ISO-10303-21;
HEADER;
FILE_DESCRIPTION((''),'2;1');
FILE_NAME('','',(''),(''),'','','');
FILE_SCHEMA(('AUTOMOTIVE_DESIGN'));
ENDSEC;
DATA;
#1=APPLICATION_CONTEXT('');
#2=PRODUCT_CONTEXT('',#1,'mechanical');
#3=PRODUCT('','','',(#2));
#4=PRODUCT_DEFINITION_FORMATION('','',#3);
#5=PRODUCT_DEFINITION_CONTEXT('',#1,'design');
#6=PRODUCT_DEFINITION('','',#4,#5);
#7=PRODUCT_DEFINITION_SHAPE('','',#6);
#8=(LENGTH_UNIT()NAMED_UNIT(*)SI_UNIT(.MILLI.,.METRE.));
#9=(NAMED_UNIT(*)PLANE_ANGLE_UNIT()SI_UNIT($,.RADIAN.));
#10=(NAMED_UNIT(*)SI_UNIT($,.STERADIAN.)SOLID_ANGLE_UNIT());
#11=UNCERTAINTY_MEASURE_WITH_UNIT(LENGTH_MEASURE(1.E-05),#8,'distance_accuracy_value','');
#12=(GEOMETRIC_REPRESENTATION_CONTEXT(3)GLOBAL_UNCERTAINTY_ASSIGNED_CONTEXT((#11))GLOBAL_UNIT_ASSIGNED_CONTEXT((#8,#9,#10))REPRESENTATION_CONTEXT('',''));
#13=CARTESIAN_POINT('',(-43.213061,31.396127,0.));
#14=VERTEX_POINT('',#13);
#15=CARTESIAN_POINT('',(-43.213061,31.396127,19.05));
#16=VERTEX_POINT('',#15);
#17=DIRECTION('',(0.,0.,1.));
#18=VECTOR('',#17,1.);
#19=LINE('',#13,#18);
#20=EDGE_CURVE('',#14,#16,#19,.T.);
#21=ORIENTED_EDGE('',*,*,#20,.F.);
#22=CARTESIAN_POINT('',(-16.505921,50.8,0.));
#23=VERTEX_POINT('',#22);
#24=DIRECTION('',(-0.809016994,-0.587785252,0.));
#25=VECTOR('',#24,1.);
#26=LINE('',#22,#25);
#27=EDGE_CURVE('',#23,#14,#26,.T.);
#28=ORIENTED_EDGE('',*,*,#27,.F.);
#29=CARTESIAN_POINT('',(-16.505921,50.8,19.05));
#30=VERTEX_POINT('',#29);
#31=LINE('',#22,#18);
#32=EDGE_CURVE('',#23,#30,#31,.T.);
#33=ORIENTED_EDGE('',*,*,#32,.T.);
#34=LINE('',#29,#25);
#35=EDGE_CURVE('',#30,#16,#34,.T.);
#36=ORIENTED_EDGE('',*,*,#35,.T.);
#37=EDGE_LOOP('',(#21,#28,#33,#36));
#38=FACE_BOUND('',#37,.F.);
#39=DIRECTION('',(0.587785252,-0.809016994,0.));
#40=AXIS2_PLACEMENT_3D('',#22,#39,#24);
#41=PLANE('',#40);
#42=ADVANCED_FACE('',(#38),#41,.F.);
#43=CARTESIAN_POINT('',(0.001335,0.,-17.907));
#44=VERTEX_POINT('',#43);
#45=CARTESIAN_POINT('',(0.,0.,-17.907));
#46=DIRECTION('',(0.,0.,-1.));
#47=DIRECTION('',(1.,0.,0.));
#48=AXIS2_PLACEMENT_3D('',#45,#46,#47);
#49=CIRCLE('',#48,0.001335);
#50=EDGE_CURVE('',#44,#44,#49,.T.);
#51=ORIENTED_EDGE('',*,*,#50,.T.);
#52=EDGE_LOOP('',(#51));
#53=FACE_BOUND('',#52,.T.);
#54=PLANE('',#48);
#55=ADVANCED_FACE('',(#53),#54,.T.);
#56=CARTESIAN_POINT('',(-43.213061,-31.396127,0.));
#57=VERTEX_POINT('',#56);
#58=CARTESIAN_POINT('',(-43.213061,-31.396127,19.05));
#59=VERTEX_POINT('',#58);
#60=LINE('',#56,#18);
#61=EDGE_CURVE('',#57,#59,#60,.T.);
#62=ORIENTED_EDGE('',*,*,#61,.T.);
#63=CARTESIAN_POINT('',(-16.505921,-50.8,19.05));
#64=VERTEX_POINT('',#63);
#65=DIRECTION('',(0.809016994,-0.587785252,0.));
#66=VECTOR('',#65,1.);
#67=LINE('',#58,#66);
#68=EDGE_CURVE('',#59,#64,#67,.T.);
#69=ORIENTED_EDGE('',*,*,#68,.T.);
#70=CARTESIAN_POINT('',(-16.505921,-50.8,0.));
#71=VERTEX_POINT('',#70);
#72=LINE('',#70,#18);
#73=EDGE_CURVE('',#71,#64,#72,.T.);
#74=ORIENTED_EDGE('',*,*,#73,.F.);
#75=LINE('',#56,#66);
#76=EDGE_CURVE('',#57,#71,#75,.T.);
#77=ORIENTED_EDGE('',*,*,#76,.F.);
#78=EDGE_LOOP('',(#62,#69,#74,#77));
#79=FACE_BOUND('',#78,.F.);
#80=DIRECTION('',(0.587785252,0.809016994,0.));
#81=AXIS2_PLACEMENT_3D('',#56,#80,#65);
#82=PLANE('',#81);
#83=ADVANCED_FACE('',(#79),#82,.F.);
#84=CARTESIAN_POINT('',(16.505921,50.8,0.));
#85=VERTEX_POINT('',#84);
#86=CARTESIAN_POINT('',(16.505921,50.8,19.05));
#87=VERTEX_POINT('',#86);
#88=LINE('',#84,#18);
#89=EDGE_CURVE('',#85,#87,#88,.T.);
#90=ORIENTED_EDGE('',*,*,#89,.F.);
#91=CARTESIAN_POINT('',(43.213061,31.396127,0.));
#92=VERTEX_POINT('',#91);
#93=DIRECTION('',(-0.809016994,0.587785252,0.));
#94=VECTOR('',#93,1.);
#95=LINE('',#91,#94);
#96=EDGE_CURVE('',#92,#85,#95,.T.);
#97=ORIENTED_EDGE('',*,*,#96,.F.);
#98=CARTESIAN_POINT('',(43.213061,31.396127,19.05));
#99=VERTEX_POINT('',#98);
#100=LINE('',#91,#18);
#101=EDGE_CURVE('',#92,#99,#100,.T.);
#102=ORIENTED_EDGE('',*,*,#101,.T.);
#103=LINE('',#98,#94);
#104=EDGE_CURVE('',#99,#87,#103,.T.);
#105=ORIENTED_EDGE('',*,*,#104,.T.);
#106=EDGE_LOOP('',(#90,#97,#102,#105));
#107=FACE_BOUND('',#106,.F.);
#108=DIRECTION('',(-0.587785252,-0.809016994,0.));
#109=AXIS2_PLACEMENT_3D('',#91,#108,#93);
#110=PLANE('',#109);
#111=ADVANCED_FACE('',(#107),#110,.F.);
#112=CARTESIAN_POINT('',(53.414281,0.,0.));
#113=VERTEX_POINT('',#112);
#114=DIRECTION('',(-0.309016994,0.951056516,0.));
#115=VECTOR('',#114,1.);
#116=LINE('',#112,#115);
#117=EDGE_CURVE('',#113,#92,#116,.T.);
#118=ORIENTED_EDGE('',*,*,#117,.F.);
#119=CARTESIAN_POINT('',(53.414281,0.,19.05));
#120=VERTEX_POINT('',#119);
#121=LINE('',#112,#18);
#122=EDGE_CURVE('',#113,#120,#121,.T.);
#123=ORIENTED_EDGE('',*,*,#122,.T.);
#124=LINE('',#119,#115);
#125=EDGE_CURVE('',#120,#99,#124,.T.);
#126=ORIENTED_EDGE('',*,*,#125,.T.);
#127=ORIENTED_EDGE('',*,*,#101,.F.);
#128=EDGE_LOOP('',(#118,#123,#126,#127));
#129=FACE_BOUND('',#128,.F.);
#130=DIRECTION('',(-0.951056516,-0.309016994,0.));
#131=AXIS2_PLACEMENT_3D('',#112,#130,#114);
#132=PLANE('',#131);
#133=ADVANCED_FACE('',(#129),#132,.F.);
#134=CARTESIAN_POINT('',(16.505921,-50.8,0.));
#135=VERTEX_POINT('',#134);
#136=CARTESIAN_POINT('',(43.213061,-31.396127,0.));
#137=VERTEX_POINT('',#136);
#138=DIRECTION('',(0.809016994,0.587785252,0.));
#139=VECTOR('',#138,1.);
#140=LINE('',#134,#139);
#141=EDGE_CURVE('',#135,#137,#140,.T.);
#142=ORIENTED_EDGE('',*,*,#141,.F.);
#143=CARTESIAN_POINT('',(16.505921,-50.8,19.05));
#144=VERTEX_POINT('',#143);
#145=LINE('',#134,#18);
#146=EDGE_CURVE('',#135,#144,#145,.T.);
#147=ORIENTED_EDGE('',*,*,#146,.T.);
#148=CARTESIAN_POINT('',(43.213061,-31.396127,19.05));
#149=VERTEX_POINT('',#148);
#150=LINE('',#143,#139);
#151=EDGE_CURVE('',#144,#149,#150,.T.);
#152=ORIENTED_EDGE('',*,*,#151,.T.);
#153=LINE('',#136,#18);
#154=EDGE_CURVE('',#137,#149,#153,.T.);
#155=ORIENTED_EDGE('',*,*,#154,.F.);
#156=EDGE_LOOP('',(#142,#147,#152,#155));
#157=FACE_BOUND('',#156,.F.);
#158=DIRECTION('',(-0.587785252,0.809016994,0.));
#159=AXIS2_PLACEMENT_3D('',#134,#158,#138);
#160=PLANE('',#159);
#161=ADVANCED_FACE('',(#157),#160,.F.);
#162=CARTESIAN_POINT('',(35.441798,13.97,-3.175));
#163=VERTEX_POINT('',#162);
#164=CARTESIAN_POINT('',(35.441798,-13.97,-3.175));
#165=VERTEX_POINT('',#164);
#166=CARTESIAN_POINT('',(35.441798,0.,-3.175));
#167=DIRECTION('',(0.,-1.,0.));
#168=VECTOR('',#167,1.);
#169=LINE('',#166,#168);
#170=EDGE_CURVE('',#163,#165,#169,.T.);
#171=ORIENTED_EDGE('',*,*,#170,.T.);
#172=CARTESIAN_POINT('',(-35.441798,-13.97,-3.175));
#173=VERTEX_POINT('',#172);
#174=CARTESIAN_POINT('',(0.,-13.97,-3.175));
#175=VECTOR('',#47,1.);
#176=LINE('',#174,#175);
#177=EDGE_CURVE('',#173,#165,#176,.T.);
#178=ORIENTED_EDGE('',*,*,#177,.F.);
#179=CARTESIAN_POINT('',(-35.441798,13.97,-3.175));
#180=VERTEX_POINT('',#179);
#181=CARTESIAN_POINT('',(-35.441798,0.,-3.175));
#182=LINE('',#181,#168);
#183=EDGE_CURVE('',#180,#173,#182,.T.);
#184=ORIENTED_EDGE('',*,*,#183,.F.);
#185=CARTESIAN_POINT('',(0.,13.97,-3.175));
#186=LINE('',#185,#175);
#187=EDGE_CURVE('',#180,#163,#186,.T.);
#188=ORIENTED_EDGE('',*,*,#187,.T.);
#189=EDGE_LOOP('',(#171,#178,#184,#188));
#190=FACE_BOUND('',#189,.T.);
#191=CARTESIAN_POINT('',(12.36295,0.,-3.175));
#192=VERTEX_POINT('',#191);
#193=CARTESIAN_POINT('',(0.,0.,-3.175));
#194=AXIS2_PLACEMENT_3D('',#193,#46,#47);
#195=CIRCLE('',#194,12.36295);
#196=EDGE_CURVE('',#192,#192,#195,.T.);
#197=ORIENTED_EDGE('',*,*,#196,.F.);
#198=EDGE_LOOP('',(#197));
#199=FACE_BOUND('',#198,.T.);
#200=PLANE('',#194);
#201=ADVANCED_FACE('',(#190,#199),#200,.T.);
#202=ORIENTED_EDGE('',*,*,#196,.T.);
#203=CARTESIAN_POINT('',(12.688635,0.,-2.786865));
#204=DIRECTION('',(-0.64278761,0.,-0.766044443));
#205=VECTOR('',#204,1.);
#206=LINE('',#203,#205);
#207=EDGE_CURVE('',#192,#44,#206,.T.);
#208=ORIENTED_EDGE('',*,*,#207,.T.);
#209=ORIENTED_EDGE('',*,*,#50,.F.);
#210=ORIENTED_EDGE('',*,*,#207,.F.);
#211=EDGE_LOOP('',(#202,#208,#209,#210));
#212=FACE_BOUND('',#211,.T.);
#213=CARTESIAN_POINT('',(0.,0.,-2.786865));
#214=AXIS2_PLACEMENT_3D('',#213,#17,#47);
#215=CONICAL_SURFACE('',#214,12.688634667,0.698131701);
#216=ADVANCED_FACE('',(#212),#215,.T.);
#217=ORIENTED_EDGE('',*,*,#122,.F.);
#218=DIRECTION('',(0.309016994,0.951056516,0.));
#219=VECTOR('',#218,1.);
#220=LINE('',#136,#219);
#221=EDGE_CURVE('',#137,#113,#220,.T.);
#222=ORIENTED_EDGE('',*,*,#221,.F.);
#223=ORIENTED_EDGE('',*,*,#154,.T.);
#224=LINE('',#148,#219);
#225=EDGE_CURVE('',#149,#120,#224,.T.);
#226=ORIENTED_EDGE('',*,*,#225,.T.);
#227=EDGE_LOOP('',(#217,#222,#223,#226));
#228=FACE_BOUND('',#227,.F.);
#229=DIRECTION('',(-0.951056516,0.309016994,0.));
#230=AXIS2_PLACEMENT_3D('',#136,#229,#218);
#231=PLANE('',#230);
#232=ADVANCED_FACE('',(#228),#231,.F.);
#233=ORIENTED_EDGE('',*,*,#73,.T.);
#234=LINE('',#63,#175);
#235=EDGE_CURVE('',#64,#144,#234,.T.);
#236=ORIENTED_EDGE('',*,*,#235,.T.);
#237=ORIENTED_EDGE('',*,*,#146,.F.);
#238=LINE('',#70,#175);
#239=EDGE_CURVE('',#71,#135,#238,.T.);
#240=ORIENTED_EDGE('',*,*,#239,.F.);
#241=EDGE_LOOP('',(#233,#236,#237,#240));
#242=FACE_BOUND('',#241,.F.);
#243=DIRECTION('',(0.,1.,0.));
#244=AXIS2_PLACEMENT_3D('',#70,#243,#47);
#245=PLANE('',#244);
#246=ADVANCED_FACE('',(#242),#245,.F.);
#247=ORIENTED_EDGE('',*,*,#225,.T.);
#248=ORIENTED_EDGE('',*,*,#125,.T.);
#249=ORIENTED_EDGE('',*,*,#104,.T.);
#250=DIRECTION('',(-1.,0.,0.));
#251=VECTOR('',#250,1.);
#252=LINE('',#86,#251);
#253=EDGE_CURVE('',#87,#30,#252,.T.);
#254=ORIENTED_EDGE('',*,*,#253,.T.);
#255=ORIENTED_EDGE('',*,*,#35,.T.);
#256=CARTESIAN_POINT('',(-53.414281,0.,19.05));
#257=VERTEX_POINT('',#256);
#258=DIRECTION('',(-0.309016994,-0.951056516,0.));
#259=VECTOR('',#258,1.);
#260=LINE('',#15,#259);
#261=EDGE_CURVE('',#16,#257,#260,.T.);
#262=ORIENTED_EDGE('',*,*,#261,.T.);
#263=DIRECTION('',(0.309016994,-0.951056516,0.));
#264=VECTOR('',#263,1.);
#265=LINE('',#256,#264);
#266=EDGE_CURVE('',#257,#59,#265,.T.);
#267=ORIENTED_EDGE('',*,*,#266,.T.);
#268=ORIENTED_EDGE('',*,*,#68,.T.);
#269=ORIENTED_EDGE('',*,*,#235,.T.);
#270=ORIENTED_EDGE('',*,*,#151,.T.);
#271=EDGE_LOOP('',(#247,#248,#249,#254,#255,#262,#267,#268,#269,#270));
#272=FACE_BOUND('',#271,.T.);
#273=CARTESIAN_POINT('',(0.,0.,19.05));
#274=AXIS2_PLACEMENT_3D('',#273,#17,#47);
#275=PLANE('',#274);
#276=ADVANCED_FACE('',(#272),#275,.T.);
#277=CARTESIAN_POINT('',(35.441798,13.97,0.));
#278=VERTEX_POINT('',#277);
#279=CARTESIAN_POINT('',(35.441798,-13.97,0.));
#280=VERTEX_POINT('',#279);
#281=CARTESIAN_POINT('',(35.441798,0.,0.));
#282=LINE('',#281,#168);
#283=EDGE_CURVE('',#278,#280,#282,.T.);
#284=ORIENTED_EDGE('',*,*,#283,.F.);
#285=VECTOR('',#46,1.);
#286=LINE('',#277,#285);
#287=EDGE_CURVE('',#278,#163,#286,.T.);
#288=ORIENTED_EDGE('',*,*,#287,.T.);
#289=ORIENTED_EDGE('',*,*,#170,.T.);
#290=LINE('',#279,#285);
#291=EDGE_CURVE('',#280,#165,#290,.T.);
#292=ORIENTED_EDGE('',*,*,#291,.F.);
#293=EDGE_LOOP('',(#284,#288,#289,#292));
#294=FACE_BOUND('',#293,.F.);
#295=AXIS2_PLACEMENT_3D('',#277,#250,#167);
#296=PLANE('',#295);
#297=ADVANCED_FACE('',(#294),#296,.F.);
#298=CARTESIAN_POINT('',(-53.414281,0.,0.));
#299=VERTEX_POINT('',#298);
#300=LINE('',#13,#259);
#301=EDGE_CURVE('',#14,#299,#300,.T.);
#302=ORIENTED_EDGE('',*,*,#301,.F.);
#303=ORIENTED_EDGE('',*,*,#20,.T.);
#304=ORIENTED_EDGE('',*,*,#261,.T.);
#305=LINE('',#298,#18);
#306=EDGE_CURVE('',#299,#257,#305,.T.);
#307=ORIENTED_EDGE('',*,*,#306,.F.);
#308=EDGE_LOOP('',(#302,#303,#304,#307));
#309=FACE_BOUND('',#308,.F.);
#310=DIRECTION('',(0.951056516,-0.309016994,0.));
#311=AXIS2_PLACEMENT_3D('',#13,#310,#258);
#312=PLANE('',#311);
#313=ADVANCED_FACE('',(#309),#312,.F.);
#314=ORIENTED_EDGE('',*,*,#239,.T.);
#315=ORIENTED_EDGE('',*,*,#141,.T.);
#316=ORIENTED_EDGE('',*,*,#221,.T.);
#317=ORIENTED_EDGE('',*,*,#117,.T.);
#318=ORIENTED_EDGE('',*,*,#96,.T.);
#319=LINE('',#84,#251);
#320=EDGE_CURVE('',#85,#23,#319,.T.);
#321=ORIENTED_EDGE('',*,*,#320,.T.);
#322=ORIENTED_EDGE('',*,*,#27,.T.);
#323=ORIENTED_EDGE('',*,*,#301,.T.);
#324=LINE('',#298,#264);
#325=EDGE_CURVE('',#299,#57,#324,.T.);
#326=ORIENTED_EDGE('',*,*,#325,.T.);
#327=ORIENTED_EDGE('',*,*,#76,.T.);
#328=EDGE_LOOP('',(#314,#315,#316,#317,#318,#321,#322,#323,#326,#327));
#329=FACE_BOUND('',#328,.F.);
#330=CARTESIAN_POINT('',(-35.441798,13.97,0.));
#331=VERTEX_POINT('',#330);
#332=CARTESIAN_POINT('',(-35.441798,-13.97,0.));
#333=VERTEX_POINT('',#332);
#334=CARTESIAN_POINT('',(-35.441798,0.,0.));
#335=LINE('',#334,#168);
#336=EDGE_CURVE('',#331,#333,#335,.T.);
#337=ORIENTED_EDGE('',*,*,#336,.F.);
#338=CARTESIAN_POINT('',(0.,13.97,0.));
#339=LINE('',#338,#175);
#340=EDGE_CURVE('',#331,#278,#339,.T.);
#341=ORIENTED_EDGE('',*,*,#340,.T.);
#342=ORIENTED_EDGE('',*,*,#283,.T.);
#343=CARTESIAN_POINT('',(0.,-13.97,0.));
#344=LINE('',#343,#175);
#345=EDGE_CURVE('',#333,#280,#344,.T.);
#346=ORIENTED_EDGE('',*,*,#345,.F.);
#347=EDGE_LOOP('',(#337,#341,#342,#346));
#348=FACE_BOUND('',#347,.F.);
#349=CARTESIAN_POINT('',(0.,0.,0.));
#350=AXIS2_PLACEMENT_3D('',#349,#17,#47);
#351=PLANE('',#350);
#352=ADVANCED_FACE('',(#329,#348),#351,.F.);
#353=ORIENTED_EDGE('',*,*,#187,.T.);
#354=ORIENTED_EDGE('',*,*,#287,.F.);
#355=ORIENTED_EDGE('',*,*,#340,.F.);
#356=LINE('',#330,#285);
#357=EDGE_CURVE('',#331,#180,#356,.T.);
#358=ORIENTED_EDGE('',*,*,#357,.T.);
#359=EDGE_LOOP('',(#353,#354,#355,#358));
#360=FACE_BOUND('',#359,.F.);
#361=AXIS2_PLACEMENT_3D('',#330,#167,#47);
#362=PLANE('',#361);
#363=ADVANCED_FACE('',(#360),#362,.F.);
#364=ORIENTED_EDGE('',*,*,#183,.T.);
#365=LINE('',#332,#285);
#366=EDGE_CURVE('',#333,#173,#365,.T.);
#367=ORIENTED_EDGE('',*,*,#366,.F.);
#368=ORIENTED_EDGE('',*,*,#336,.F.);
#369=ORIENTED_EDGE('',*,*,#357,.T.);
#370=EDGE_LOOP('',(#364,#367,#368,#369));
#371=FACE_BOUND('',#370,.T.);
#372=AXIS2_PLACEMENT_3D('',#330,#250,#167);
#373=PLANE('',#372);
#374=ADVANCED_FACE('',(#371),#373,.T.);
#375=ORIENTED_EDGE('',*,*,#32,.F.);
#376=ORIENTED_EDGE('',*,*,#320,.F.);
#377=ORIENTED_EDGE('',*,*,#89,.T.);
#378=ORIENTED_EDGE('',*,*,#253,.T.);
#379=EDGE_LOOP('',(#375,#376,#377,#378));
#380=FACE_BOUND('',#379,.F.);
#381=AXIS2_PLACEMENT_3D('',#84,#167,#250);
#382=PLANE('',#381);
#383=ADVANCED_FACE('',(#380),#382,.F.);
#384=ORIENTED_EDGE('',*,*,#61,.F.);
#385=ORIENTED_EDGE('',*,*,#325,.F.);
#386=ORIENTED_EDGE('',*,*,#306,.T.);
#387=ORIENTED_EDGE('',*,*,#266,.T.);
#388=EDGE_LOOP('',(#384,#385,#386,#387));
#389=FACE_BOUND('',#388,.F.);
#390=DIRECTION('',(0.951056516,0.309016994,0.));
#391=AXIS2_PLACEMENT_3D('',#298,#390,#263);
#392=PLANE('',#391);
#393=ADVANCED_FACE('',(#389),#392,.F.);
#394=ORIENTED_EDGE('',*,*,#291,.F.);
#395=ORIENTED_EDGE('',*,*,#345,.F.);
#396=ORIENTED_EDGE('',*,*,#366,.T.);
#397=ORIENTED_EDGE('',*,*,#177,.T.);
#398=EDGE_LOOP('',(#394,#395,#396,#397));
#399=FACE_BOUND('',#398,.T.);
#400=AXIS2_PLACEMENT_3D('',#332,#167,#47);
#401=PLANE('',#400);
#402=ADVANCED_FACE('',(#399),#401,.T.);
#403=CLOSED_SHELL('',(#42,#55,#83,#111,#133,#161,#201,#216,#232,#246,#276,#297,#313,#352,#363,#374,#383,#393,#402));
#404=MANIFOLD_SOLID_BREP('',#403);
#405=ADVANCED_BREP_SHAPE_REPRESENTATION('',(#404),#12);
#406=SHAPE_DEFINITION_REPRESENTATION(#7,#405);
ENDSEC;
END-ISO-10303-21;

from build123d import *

# Parameters (mm, degrees)
F1_DEPTH = 19.05
F2_W     = 70.8835957375
F2_H     = 27.94
F3_DEPTH = 3.175
F4_R     = 12.6886346665
F5_DEPTH = 14.732


# Not quite as in the source:
# - a fillet or chamfer that OpenCascade refuses, or shapes differently, is made with other operations: its cross-section is extruded or revolved along the edge and cut away or added


with BuildPart() as f1:
    # F0 (on Top) → F1 (new body)
    with BuildSketch(Plane.XY):
        Polygon((-16.5059205686, -50.8), (16.5059205686, -50.8), (43.2130610643, -31.3961266285), (53.4142809913, 0), (43.2130610643, 31.3961266285), (16.5059205686, 50.8), (-16.5059205686, 50.8), (-43.2130610643, 31.3961266285), (-53.4142809913, 0), (-43.2130610643, -31.3961266285), align=None)
    extrude(amount=F1_DEPTH)

    # F2 (on face) → F3 (join)
    with BuildSketch(Plane(origin=(0, 0, 0), x_dir=(1, 0, 0), z_dir=(0, 0, -1))):
        Rectangle(F2_W, F2_H)
    extrude(amount=F3_DEPTH)

    # F4 (on face) → F5 (join)
    with BuildSketch(Plane(origin=(0, 0, -3.175), x_dir=(1, 0, 0), z_dir=(0, 0, -1))):
        Circle(F4_R)
    extrude(amount=F5_DEPTH)

    # F6: chamfer of 12.6873 x 15.1201353553 on 1 edges, made by hand


with BuildPart() as f6_tool2:
    # F6_s3 → F6_t4 (revolve)
    with BuildSketch(Plane.XZ):
        Polygon((12.6886346665, -2.7868646447), (0.0013346665, -17.907), (12.6886346665, -17.907), align=None)
    revolve(axis=Axis((0, 0, -17.907), (0, 0, -1)))

    split(bisect_by=Plane.XY.offset(-3.175), keep=Keep.BOTTOM)


with BuildPart() as f1_1:
    add(f1.part)

    # F6_t1: cut F6_tool2
    add(f6_tool2.part, mode=Mode.SUBTRACT)


solid = f1_1.part
